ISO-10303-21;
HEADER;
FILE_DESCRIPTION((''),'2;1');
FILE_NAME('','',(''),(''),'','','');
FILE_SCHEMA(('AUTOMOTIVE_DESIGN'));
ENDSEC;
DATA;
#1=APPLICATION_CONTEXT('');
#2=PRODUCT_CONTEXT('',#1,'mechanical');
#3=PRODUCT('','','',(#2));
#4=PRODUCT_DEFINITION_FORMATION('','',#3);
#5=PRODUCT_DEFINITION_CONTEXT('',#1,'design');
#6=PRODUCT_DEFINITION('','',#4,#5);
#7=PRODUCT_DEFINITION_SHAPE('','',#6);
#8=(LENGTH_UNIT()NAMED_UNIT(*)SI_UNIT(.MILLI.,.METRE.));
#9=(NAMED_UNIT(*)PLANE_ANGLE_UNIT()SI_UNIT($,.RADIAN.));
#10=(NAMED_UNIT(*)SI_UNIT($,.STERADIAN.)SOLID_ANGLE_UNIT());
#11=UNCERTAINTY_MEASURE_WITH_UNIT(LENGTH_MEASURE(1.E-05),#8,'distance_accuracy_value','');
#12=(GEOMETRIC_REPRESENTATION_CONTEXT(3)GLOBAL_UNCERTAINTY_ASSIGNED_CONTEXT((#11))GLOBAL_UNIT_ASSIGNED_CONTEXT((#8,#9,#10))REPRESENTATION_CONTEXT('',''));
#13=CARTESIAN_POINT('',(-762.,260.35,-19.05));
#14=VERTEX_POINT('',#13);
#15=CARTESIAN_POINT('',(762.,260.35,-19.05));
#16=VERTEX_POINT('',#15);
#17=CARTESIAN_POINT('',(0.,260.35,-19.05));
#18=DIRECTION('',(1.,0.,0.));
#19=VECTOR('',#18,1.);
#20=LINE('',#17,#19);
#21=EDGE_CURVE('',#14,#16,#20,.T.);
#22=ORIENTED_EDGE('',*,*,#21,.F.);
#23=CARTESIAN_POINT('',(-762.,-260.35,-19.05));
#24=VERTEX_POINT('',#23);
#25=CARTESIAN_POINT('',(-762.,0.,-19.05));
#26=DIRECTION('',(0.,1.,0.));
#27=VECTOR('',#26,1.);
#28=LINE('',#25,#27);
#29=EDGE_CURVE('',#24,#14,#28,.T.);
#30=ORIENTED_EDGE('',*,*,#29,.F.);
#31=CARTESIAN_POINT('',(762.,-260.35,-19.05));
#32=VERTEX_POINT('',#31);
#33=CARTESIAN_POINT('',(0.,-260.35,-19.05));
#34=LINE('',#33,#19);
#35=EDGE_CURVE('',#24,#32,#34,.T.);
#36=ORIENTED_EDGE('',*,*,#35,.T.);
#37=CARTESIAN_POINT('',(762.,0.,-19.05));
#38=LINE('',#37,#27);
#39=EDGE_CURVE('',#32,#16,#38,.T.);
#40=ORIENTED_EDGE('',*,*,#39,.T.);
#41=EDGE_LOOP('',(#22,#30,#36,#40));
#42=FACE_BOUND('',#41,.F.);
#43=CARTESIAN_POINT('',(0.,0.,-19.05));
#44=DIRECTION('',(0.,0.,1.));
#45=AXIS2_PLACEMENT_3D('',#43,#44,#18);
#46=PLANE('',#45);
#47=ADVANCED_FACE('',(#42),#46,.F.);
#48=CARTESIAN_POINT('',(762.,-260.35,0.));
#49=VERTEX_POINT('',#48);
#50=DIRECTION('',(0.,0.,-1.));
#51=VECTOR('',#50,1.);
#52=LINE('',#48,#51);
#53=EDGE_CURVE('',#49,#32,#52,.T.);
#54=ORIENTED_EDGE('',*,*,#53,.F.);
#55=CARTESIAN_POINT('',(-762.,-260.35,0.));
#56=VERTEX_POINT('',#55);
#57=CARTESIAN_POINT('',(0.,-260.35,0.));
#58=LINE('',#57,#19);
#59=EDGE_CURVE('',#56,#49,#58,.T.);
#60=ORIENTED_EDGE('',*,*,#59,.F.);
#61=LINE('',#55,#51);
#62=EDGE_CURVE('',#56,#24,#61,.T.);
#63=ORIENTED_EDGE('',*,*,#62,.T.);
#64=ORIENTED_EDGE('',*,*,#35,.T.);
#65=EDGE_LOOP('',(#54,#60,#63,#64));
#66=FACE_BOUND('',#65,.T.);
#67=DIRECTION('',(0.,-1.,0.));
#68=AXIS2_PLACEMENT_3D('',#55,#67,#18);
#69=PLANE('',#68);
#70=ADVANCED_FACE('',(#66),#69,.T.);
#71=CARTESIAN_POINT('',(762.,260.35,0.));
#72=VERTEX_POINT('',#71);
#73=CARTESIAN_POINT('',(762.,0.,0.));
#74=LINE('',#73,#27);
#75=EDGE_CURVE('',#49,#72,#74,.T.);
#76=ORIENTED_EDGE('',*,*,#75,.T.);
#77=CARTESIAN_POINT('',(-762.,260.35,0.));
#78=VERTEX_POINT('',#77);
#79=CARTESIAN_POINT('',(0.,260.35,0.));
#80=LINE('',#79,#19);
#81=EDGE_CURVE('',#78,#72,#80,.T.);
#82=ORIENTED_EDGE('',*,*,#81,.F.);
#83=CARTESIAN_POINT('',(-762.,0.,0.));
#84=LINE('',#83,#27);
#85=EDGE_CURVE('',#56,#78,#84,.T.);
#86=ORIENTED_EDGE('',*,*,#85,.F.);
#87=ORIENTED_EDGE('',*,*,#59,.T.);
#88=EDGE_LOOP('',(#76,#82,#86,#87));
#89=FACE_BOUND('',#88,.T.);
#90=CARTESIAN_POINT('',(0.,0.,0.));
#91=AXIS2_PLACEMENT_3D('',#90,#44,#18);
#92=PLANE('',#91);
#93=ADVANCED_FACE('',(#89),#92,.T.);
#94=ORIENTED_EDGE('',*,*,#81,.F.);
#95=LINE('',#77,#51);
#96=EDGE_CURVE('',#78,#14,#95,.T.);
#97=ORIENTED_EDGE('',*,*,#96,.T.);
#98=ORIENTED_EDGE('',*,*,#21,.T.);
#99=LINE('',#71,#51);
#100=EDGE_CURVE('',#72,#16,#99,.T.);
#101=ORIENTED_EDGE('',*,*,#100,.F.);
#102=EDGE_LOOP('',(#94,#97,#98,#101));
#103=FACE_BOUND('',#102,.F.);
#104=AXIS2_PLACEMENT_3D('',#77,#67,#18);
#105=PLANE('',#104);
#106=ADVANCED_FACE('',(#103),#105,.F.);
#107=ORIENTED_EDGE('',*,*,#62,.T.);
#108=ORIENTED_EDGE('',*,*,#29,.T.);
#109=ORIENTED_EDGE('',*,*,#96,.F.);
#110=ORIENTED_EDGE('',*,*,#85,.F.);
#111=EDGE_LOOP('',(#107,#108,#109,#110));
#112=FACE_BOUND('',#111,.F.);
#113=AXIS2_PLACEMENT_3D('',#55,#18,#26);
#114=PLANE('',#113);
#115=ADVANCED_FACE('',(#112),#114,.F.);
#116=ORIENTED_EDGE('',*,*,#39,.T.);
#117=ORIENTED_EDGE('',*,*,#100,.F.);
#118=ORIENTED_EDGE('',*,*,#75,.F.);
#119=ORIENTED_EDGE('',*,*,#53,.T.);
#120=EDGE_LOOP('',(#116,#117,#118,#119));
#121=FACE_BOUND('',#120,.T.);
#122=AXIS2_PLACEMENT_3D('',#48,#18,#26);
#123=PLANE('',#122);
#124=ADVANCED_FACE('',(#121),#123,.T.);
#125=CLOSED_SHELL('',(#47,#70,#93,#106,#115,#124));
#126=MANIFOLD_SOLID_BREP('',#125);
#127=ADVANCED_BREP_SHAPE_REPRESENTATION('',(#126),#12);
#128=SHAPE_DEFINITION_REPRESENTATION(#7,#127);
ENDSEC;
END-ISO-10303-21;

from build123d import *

# Parameters (mm, degrees)
F1_W     = 1524
F1_H     = 520.7
F2_DEPTH = 19.05


# Not quite as in the source:
# - a variable given as a bare number and used for a length is read in inches; the dataset says mm whatever the document's units were


with BuildPart() as f2:
    # F1 (on Top) → F2 (new body)
    with BuildSketch(Plane.XY):
        Rectangle(F1_W, F1_H)
    extrude(amount=-F2_DEPTH)


solid = f2.part
